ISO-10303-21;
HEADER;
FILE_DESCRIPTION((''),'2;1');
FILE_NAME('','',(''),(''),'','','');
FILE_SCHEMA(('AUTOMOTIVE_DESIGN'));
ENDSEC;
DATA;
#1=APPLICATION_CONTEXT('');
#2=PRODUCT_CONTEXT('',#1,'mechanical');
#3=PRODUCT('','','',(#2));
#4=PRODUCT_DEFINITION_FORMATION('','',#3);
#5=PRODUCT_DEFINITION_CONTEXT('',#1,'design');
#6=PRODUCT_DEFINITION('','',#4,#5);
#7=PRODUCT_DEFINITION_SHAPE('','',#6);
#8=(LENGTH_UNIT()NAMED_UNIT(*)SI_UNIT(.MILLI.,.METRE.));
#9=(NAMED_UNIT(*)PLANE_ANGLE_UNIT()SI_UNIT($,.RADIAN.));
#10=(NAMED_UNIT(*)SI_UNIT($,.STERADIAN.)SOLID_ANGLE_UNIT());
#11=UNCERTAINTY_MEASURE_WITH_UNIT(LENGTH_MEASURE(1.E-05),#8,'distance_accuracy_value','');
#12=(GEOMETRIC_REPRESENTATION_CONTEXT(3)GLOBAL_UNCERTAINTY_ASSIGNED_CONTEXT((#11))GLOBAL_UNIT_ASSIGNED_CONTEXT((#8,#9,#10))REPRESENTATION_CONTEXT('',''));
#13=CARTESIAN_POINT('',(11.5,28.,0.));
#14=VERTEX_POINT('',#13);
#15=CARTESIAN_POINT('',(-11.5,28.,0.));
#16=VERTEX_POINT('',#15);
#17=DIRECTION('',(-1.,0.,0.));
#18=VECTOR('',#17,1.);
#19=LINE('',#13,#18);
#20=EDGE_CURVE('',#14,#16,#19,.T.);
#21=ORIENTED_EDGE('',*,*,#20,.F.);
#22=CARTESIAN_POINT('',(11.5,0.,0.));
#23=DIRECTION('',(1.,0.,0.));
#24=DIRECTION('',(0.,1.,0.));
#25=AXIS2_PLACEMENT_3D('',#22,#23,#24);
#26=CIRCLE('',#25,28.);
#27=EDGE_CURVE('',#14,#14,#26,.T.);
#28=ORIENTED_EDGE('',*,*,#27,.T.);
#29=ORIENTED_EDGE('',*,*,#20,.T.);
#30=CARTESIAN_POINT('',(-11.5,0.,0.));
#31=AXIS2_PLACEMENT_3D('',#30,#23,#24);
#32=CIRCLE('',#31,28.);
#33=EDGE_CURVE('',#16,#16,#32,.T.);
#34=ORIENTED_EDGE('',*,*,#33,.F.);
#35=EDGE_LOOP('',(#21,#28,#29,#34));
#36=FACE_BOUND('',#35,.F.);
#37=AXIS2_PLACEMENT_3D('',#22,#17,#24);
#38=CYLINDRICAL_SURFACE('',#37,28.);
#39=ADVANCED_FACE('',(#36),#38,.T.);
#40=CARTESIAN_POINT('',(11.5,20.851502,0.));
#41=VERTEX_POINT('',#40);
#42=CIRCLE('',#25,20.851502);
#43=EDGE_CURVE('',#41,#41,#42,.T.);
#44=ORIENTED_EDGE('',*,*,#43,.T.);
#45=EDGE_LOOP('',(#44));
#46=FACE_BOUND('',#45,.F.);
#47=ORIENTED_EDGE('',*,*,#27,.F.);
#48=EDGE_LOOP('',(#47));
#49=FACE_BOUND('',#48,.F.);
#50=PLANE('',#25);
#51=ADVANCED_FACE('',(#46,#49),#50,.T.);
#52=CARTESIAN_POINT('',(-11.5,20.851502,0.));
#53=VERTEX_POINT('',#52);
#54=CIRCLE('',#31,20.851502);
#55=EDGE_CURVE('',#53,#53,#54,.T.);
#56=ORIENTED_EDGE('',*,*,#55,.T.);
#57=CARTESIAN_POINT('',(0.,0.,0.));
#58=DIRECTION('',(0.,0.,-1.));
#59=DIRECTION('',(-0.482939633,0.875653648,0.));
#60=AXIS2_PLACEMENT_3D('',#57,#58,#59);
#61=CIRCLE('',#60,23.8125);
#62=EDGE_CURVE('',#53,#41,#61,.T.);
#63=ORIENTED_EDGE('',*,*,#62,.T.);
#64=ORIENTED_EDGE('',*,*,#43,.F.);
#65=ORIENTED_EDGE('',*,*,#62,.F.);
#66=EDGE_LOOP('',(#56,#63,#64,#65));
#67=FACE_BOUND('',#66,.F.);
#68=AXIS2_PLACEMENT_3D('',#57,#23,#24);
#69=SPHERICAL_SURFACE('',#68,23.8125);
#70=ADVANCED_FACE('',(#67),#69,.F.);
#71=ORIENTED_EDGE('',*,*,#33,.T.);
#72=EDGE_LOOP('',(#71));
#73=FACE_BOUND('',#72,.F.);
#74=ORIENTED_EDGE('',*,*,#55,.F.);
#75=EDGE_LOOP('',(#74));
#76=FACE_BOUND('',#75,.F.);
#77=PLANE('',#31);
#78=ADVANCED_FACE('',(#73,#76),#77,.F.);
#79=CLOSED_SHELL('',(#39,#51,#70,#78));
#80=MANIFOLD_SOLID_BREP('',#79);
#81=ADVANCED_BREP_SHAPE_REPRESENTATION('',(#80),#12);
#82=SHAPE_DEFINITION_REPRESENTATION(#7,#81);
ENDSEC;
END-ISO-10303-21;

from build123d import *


# Not quite as in the source:
# - a feature names something its author has since deleted; it is built from what else it names


with BuildPart() as f1:
    # F0 (on Top) → F1 (revolve)
    with BuildSketch(Plane.XY):
        with BuildLine():
            ThreePointArc((-11.5, 20.8515024938), (0, 23.8125), (11.5, 20.8515024938))
            Line((11.5, 20.8515024938), (11.5, 28))
            Line((11.5, 28), (-11.5, 28))
            Line((-11.5, 28), (-11.5, 20.8515024938))
        make_face()
    revolve(axis=Axis((-0.2900734544, 0, 0), (1, 0, 0)))


solid = f1.part
